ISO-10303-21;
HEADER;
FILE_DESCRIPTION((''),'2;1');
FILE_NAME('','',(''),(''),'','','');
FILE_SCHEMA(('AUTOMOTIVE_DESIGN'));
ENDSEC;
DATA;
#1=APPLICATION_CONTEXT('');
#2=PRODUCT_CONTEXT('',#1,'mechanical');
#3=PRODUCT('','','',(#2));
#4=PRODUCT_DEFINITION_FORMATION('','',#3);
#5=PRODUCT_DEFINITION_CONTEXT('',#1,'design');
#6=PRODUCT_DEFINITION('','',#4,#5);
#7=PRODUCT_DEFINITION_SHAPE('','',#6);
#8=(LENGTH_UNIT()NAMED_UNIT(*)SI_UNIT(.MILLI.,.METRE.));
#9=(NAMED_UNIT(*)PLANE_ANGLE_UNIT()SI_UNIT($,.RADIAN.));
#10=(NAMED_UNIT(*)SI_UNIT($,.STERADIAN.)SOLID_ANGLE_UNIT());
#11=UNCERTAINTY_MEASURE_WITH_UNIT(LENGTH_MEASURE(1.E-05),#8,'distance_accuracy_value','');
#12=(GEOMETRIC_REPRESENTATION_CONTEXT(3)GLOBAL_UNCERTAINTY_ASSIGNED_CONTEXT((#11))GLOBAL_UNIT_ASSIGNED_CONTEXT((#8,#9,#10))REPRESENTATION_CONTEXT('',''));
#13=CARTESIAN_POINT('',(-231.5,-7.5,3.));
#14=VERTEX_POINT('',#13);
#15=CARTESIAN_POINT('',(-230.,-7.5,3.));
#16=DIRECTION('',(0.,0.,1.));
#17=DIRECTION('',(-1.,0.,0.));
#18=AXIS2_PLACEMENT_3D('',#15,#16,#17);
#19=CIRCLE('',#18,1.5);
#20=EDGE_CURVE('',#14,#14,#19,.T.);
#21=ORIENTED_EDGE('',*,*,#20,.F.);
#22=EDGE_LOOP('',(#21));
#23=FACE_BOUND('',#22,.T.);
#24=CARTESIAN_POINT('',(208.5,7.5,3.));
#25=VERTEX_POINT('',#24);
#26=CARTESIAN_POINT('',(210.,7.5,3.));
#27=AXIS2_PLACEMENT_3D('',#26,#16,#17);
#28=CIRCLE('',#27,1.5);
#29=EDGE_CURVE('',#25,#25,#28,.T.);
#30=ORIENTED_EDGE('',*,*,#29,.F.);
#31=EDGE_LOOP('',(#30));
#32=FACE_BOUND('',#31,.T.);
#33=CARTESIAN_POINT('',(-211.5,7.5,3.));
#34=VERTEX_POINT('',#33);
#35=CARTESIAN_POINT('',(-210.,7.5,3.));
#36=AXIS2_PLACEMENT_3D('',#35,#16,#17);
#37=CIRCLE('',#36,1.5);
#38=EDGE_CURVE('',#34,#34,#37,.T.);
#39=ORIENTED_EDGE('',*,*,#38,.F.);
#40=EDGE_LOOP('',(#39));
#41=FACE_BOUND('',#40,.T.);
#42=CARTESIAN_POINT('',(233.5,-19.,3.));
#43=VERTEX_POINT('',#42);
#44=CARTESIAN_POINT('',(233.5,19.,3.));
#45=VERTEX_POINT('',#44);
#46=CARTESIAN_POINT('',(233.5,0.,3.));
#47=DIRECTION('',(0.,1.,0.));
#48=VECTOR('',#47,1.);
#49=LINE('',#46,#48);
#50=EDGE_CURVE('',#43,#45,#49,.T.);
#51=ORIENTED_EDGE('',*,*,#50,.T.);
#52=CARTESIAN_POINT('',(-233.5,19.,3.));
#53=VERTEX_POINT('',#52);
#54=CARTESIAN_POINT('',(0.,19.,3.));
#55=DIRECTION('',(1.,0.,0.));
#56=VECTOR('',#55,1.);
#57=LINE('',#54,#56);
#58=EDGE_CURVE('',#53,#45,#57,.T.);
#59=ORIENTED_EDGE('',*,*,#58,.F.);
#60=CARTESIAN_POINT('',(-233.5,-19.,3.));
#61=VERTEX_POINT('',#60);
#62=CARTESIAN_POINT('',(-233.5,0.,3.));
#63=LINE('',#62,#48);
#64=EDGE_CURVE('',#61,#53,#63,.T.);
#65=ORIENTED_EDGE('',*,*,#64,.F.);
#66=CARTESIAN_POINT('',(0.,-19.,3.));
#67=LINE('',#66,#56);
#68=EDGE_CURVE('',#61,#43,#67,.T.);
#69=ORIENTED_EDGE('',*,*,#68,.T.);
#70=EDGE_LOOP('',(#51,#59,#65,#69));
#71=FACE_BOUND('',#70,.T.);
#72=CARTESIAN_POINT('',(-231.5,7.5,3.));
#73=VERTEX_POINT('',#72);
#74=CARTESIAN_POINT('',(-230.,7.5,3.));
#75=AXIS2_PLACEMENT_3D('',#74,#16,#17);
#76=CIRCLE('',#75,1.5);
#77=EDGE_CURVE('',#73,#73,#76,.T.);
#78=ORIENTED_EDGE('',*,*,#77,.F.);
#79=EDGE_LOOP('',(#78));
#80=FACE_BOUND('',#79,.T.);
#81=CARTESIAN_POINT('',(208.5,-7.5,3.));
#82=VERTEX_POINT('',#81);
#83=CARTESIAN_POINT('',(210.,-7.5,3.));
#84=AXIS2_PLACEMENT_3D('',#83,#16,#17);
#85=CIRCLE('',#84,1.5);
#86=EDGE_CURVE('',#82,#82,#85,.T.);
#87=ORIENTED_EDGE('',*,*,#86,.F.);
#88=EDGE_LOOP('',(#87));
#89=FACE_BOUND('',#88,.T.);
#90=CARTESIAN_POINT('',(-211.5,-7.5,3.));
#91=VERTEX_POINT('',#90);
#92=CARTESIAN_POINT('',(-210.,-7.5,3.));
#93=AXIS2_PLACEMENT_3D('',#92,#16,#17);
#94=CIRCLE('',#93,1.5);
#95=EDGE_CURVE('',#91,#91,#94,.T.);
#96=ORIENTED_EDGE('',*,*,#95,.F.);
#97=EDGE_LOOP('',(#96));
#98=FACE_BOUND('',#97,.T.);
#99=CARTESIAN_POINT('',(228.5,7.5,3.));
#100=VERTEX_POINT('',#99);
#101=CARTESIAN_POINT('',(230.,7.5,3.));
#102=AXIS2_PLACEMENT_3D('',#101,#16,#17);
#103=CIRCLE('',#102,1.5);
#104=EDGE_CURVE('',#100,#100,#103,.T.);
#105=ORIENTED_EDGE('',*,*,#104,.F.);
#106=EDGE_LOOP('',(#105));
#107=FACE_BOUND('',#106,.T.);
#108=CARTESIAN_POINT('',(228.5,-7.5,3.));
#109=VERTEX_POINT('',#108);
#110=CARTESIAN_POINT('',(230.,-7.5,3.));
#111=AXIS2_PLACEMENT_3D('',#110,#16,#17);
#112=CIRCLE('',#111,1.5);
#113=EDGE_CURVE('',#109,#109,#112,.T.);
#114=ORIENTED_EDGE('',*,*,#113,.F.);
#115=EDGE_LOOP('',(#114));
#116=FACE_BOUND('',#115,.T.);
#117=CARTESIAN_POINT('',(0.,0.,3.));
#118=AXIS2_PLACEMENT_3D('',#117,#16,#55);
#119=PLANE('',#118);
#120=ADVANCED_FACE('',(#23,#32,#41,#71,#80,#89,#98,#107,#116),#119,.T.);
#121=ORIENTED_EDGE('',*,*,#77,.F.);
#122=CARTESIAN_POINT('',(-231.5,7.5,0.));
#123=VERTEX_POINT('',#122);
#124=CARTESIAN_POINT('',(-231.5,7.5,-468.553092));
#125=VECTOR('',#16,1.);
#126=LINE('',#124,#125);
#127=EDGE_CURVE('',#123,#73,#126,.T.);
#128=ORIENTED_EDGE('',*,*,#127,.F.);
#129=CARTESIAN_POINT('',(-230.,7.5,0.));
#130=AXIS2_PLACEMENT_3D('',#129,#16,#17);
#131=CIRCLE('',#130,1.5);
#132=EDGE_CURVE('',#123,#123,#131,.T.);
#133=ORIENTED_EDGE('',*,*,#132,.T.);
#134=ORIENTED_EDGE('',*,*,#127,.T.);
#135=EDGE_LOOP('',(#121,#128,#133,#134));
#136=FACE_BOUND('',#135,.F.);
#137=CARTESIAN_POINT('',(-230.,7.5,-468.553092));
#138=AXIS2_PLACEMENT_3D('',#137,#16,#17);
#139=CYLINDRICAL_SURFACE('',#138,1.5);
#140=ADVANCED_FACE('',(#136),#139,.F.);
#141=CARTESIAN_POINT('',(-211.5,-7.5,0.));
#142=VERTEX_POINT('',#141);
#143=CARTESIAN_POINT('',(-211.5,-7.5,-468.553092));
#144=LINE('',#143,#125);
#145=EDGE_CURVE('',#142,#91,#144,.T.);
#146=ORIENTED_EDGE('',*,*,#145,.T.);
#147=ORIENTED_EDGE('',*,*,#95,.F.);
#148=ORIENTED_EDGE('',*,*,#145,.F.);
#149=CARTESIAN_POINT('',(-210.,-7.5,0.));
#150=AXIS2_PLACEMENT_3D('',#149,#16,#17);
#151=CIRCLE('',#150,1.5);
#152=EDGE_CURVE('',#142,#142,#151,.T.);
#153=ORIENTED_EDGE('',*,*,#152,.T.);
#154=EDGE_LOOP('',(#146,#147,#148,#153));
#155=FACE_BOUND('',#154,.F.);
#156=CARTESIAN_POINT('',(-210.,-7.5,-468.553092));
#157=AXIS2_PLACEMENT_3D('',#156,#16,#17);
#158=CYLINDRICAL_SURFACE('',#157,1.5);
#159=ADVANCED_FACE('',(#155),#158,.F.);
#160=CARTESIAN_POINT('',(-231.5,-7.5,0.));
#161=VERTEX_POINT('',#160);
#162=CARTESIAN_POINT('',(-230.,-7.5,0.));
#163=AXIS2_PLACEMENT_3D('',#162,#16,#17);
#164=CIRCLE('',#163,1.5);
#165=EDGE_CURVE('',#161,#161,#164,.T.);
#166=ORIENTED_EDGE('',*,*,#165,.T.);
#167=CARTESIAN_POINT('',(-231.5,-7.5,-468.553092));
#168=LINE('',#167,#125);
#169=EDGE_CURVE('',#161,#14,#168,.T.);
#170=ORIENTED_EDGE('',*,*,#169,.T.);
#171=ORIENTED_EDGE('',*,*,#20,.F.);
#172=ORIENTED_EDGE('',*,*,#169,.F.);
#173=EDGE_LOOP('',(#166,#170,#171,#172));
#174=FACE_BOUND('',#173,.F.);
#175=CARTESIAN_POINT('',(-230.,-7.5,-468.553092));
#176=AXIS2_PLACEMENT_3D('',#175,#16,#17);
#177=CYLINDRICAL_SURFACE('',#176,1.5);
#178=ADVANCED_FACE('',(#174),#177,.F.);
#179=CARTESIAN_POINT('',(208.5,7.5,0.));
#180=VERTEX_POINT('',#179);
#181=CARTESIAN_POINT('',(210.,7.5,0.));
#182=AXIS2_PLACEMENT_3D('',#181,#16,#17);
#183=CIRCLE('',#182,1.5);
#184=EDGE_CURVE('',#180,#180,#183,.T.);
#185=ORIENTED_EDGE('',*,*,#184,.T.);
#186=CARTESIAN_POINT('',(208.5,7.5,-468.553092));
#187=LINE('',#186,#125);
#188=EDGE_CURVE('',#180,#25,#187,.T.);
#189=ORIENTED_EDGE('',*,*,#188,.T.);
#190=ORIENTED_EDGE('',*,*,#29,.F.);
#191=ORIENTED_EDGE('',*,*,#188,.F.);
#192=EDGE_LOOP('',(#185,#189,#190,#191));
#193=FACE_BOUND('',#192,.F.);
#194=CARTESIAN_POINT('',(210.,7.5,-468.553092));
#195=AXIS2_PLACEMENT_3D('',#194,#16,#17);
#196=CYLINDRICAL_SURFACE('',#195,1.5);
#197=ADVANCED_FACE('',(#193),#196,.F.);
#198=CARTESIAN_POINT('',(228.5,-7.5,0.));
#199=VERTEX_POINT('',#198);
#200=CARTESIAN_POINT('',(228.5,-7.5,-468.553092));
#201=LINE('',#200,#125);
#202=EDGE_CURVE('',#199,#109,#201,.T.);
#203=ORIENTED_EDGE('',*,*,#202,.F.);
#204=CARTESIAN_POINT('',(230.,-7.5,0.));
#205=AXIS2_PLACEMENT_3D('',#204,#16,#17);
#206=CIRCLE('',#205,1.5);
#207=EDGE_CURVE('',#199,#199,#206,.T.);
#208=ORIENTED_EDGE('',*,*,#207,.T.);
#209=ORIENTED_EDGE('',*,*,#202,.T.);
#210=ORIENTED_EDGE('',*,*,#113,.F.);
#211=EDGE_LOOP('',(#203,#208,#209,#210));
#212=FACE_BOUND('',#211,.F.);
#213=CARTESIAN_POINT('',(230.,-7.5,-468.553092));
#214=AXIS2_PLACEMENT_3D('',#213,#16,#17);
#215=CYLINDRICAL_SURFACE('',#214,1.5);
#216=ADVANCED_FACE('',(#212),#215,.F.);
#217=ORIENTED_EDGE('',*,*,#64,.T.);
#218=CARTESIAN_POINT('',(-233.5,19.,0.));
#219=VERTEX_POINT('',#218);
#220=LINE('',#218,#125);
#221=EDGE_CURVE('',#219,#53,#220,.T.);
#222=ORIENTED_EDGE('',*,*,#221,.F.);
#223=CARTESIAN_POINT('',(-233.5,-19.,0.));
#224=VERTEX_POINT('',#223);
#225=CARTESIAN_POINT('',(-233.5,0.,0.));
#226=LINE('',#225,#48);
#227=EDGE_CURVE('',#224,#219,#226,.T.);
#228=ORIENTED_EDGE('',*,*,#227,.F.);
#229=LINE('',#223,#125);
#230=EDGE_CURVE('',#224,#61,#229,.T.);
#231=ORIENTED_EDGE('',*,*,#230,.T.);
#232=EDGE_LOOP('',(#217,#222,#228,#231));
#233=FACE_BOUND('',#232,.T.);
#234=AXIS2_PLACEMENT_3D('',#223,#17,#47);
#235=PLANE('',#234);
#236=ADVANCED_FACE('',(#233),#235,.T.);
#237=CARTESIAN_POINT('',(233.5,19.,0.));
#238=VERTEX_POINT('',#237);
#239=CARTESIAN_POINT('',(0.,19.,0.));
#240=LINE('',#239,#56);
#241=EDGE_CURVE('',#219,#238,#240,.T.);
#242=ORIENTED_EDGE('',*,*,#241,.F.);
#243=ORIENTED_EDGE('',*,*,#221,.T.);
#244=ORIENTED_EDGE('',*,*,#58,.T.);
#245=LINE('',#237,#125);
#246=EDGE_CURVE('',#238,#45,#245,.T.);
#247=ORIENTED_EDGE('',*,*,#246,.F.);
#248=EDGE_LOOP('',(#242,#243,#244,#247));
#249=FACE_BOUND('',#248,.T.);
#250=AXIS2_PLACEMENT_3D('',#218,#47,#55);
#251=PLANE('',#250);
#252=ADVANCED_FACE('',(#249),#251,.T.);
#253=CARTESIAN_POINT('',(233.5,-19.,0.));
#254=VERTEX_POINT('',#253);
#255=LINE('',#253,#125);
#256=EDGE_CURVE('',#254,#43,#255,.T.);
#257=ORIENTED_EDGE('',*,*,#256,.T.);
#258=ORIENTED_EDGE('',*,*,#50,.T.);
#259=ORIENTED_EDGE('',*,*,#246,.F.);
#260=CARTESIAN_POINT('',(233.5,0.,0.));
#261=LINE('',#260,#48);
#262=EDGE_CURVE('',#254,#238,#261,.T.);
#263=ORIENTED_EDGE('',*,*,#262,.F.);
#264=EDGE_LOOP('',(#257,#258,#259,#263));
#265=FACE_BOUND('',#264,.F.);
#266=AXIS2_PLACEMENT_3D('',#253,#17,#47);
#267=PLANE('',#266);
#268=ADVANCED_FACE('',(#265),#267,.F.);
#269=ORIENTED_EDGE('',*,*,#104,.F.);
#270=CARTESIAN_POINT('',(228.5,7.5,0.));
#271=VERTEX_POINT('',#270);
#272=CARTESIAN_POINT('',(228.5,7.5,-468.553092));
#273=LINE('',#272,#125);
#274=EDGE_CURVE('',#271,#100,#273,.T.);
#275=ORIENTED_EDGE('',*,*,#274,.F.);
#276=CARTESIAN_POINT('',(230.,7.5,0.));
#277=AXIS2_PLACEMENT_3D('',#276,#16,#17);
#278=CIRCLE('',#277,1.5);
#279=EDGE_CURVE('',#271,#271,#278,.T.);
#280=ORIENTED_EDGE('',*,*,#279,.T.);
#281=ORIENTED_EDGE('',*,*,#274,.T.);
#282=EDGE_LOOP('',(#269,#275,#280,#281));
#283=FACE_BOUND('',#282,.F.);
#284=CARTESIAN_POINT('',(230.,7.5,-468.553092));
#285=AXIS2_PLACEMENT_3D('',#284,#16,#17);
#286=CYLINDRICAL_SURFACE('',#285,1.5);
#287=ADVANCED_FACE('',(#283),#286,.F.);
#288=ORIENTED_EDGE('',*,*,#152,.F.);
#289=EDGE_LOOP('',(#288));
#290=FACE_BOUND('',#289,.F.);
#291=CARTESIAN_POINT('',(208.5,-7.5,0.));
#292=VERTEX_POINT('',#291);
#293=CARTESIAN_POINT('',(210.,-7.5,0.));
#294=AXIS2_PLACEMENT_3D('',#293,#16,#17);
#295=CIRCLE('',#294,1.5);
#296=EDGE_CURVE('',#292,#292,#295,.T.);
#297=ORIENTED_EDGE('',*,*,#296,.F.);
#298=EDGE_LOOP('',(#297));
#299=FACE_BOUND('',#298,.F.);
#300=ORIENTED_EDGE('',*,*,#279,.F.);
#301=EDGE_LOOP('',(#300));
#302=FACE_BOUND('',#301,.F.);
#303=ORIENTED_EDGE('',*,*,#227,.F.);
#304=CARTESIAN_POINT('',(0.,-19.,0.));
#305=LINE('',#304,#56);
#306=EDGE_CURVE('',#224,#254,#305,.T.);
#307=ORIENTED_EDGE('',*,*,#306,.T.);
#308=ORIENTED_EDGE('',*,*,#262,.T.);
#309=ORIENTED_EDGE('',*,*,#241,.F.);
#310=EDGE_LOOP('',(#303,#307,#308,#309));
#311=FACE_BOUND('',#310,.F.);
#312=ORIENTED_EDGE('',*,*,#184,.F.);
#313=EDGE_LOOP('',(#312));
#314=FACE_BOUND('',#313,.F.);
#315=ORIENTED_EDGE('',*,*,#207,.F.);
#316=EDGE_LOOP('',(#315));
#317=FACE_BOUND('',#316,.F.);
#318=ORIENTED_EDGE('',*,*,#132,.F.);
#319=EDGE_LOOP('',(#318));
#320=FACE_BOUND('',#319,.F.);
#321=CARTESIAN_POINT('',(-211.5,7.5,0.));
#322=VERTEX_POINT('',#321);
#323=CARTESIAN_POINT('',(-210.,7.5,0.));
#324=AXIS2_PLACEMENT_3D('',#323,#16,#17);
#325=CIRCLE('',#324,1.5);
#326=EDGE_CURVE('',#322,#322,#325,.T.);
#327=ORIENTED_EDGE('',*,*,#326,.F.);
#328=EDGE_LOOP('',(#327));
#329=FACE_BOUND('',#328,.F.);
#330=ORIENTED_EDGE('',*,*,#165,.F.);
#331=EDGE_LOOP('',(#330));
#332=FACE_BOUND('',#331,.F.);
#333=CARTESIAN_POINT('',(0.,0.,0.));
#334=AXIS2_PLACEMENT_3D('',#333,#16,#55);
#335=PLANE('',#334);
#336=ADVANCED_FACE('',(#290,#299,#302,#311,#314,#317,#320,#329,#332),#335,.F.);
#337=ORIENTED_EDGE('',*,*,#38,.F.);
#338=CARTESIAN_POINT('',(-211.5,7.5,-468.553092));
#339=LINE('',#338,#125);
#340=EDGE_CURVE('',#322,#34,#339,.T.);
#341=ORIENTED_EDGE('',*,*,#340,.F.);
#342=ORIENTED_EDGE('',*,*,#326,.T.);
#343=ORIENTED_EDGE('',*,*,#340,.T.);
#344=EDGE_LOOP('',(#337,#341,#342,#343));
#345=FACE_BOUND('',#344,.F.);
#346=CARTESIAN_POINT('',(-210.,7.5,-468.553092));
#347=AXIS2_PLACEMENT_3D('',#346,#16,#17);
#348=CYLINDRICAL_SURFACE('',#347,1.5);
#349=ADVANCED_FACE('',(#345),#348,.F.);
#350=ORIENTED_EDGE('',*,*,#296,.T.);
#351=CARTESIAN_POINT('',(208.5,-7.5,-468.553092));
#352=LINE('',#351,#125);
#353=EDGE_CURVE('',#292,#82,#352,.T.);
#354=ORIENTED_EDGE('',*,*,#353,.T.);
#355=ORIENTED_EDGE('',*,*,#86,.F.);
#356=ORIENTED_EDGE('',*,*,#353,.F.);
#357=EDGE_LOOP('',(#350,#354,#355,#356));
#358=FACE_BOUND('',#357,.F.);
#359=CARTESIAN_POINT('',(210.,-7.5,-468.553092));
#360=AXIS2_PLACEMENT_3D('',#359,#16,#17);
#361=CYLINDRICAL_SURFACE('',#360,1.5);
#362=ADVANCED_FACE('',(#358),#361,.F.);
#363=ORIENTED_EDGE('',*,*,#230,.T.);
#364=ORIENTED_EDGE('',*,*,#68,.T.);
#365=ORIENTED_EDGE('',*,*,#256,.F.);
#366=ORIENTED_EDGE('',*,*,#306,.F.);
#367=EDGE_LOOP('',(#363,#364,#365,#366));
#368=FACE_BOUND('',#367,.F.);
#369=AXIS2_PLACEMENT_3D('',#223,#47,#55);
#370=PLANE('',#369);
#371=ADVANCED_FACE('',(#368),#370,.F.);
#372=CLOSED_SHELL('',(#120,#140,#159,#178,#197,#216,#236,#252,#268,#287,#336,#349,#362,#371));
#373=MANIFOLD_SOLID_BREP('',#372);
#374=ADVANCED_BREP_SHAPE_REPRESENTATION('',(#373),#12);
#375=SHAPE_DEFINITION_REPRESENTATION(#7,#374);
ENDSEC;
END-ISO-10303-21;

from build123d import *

# Parameters (mm, degrees)
F0_W     = 467
F0_H     = 38
F1_DEPTH = 3
F2_D     = 3


# Not quite as in the source:
# - a feature names something its author has since deleted; it is built from what else it names


with BuildPart() as f1:
    # F0 (on Top) → F1 (new body)
    with BuildSketch(Plane.XY):
        Rectangle(F0_W, F0_H)
    extrude(amount=F1_DEPTH)

    # F2 (through all)
    with Locations(Plane(origin=(0, 0, 0), x_dir=(1, 0, 0), z_dir=(0, 0, -1))):
        with Locations((-230, -7.5), (-210, -7.5), (-210, 7.5), (-230, 7.5), (210, -7.5), (230, -7.5), (230, 7.5), (210, 7.5)):
            Hole(F2_D / 2)


solid = f1.part
